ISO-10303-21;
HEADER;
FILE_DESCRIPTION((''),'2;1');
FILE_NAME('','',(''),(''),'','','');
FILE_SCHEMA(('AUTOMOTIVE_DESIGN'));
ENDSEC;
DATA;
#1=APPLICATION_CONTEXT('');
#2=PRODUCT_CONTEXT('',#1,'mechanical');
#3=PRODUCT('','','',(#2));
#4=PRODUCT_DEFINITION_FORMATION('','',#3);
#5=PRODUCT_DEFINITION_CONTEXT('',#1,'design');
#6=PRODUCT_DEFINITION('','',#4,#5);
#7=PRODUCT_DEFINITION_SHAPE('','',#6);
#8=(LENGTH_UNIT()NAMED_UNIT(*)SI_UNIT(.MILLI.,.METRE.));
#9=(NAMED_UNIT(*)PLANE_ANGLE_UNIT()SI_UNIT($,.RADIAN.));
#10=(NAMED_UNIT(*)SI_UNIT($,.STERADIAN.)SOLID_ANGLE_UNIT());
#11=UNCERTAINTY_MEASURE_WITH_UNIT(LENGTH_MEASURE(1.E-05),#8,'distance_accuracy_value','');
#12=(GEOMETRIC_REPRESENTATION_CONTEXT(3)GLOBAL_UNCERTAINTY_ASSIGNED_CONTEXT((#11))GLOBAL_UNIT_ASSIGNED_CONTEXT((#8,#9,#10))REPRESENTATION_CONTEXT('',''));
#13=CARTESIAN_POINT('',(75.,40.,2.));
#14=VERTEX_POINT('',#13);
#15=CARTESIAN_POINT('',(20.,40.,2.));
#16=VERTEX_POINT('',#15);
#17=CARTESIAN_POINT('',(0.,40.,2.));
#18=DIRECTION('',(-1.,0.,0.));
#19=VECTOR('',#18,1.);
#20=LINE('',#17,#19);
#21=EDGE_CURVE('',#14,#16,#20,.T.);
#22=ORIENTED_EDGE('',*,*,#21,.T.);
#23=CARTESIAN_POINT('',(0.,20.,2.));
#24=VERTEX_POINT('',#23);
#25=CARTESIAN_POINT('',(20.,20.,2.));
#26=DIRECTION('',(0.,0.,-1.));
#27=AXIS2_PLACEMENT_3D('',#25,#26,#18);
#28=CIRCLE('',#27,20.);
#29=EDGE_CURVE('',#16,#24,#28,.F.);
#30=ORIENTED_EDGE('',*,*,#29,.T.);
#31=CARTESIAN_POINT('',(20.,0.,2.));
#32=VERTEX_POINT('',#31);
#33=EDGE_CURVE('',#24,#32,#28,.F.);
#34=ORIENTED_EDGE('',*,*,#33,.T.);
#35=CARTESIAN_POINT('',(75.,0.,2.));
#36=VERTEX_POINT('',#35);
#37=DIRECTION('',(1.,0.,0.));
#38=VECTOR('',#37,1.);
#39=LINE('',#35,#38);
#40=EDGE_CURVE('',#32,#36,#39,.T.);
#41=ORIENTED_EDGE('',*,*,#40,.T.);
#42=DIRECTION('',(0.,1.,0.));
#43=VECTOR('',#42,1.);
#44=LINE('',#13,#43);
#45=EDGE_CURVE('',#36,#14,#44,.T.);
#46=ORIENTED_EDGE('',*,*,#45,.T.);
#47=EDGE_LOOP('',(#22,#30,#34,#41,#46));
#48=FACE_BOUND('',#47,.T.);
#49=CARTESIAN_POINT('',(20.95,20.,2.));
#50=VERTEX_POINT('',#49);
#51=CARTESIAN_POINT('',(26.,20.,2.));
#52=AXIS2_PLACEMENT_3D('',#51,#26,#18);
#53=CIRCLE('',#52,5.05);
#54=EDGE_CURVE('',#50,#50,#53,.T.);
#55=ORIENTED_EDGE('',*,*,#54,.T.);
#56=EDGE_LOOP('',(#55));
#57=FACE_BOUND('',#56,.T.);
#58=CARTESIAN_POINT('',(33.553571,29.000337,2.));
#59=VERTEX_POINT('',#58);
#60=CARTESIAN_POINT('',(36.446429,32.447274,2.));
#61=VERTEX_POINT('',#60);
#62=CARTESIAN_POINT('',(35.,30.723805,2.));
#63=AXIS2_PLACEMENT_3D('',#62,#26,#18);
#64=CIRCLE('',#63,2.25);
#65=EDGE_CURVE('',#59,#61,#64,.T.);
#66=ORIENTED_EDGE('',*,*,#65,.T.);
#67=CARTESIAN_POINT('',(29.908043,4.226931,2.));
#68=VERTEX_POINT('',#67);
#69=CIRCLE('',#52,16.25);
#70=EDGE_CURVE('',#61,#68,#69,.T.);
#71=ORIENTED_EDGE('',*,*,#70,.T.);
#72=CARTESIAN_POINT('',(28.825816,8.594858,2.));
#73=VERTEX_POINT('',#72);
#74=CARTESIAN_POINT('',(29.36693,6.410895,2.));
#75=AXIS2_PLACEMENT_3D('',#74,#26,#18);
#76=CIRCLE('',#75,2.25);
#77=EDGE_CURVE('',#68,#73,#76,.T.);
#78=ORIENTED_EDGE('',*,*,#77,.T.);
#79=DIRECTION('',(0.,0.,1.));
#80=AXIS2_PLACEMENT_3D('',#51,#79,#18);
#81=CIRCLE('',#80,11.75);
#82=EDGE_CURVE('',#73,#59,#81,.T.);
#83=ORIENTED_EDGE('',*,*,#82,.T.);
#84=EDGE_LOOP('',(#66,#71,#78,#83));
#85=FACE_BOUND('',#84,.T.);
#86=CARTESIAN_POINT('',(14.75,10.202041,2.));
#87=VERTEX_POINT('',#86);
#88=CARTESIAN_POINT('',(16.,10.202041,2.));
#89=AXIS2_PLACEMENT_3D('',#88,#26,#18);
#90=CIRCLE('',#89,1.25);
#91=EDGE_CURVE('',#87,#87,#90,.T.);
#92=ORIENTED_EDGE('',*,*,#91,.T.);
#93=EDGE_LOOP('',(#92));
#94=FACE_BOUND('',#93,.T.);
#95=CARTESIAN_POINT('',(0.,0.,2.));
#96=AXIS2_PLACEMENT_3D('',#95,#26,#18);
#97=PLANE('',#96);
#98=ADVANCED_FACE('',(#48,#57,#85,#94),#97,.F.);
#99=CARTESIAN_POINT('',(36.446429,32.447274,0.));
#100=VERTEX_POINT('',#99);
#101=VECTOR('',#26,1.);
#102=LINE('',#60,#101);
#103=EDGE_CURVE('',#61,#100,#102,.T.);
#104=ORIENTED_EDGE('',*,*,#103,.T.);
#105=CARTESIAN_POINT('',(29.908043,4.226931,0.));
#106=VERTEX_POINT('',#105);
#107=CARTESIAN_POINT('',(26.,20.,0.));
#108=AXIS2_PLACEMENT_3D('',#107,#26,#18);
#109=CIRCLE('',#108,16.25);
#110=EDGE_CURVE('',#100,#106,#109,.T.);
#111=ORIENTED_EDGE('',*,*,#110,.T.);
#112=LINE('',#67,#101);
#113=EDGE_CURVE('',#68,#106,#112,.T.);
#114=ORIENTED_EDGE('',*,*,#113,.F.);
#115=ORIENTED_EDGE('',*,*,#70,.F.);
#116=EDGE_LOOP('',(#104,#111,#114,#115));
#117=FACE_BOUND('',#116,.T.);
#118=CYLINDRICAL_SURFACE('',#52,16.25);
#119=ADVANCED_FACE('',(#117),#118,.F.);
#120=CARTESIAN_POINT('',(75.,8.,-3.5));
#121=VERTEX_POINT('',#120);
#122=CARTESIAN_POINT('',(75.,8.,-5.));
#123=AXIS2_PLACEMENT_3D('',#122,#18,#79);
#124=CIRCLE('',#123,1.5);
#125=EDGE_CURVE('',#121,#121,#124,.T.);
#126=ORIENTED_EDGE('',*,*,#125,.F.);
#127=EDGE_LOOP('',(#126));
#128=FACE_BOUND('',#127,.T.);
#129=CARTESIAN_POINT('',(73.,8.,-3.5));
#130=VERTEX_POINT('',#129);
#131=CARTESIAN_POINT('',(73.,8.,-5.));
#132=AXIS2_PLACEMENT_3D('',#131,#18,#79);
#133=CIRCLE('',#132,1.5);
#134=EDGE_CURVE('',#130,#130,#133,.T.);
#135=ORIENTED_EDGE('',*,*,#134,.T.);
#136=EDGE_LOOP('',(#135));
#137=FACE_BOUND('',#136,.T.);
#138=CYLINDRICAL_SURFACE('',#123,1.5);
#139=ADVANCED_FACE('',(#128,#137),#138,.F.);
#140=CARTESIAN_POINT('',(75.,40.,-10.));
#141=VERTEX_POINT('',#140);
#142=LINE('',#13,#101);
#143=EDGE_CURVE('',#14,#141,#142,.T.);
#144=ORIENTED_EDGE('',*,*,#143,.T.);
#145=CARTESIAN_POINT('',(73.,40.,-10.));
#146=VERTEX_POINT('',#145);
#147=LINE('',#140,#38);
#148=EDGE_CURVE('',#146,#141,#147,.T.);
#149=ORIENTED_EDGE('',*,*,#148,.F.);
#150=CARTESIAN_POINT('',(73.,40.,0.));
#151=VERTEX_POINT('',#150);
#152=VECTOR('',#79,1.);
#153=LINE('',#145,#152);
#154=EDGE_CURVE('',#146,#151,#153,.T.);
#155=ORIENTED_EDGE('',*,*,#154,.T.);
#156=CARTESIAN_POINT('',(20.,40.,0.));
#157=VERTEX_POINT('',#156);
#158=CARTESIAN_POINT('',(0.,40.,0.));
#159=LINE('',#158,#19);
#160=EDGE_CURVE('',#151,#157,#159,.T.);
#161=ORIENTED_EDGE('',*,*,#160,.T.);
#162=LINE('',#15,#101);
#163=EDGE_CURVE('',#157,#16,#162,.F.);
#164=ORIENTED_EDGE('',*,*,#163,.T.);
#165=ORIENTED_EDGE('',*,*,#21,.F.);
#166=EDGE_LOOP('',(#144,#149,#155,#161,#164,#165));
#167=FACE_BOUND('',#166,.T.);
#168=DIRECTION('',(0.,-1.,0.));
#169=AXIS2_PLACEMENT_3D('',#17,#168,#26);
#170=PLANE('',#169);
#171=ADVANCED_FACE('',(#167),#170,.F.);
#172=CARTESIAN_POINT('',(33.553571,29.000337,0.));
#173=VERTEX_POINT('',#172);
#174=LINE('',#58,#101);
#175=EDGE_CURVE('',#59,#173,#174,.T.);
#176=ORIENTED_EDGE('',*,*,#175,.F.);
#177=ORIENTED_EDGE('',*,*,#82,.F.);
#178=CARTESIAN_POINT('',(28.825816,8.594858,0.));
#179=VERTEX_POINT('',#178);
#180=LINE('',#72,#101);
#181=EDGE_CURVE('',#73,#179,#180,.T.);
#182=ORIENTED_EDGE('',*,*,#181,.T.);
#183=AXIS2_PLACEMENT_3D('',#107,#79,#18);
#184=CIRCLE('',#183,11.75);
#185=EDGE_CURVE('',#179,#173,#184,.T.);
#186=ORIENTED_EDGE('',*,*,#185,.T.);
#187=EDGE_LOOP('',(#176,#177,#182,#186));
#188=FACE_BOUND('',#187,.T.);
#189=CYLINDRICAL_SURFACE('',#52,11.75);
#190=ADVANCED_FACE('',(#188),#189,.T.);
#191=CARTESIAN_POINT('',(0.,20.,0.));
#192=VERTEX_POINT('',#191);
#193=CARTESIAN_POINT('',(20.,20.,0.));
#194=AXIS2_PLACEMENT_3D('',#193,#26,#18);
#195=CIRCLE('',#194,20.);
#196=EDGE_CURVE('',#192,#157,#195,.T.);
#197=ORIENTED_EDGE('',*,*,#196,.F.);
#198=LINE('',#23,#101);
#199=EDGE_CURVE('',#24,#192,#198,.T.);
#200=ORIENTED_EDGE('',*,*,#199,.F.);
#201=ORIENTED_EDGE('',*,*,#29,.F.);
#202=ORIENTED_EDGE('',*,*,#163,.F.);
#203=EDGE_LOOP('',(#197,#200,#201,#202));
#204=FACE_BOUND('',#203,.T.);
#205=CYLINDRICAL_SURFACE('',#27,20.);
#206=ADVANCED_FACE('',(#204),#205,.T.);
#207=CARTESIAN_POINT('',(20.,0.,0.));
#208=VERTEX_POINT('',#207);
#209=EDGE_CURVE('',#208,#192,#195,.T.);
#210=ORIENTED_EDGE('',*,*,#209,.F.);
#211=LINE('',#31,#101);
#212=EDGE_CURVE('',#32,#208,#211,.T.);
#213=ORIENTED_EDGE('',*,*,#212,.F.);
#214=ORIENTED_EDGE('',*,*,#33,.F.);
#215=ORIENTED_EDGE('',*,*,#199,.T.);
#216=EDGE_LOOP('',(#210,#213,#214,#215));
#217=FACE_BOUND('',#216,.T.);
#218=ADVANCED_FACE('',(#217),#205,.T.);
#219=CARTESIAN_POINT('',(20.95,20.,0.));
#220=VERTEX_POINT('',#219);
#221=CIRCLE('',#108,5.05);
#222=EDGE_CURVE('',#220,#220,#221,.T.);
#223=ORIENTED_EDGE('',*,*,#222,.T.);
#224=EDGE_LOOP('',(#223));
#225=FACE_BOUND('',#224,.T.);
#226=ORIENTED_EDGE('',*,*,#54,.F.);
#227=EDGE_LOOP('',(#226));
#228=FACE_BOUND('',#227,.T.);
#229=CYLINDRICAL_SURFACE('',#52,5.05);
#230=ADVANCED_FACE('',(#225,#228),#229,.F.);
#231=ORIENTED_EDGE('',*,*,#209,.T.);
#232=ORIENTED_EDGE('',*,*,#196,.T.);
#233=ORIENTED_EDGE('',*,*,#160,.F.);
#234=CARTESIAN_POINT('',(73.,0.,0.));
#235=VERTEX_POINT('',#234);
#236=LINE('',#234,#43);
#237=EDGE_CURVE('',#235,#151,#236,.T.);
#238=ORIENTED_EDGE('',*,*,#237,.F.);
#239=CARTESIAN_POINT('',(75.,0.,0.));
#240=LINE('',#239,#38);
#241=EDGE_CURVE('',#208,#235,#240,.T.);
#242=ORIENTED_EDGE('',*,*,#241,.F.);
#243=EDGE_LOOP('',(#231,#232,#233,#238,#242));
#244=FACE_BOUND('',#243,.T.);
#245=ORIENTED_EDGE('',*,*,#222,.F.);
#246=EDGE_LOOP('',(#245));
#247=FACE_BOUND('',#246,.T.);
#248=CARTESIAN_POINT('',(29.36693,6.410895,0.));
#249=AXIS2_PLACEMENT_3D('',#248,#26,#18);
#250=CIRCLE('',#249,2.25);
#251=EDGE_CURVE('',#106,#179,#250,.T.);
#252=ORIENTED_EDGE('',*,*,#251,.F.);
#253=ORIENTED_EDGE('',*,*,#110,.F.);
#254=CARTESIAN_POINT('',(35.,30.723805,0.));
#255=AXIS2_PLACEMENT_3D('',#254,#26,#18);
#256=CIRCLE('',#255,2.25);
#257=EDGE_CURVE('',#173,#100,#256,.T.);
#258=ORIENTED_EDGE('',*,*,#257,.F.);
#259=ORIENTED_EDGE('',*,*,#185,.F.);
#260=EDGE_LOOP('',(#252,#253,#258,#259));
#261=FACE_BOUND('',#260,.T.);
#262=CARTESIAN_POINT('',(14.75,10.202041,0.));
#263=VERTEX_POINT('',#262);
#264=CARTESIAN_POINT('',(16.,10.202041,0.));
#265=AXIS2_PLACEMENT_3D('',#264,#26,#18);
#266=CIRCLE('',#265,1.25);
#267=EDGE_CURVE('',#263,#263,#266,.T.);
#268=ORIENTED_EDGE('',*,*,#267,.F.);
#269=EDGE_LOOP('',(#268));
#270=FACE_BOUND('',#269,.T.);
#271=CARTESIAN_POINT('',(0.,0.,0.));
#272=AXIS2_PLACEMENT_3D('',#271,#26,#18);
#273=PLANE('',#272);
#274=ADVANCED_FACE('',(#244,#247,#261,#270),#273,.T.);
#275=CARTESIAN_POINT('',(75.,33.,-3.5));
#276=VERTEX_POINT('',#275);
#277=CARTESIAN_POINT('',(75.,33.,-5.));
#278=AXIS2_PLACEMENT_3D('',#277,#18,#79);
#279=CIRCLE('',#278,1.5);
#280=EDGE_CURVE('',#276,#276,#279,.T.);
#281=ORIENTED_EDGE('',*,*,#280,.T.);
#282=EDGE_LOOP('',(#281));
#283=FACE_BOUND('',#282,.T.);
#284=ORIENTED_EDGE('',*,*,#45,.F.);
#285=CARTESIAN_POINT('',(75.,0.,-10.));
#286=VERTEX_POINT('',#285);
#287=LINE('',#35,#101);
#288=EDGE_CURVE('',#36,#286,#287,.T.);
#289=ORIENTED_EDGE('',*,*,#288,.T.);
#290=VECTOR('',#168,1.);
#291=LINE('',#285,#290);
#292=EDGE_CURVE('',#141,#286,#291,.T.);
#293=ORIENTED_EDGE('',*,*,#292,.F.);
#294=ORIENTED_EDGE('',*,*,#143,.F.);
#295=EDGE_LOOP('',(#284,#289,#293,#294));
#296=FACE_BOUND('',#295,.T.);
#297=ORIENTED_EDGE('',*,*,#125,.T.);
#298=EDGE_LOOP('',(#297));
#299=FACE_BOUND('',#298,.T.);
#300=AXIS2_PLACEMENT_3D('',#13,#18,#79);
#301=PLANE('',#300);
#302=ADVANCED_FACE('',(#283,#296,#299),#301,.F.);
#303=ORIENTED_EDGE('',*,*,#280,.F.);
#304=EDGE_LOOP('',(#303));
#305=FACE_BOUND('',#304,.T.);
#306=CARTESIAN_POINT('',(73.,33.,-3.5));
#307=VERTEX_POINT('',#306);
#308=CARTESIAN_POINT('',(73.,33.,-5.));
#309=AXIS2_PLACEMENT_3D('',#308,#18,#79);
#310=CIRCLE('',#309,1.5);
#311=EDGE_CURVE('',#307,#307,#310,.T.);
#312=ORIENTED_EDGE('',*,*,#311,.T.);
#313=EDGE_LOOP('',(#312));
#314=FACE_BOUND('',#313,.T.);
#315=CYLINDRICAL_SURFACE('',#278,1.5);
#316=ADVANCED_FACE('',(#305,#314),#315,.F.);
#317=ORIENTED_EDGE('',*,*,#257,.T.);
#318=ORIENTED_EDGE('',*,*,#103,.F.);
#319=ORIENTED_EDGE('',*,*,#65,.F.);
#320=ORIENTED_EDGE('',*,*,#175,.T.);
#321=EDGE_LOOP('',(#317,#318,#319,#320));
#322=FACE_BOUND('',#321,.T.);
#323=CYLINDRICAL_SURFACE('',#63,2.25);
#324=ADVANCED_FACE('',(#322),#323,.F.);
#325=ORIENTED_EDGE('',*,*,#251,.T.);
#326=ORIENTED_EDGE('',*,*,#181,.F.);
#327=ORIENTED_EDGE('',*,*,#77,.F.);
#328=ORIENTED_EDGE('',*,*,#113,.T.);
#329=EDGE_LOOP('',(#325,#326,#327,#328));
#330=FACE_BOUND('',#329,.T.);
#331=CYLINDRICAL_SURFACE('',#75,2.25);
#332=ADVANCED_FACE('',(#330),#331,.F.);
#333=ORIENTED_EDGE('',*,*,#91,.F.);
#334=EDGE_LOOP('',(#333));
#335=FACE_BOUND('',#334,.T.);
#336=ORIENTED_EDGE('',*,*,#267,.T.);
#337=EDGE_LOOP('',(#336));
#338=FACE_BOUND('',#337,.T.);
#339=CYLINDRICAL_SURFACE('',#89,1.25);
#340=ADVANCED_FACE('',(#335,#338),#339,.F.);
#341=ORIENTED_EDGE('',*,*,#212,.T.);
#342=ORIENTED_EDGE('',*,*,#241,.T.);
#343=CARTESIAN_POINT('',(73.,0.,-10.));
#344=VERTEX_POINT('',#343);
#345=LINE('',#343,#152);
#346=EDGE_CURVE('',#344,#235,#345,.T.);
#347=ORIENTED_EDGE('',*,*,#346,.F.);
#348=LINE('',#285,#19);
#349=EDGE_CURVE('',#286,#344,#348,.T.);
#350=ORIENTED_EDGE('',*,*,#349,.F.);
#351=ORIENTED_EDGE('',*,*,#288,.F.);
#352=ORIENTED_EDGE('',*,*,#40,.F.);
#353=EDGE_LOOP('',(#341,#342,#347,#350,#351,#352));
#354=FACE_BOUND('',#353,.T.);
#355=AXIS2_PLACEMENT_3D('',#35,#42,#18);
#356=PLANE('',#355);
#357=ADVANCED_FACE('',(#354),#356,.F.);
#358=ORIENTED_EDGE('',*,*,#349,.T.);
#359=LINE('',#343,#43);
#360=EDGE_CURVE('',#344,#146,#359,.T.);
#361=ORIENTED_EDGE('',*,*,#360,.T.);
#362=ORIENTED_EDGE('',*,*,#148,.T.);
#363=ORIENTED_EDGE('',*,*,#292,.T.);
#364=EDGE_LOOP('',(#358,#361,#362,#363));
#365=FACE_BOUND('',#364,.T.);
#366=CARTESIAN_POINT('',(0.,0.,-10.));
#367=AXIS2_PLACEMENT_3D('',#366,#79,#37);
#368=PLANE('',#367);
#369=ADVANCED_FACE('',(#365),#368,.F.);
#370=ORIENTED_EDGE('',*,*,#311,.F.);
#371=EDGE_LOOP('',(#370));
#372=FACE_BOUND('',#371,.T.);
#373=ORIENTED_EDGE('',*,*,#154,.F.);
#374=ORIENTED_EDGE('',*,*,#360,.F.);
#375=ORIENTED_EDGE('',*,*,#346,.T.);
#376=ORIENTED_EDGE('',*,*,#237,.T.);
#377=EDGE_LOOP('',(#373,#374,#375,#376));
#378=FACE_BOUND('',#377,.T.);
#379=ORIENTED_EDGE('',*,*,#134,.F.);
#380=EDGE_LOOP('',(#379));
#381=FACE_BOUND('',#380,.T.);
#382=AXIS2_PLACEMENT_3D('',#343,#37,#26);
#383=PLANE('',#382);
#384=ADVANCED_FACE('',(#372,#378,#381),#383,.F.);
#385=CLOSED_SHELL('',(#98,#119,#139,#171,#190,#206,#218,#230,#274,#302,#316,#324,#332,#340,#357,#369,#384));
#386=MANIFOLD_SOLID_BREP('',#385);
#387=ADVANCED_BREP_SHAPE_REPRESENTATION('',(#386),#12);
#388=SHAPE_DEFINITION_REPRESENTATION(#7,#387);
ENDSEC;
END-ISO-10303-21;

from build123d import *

# Parameters (mm, degrees)
SKETCH_2_W          = 75
SKETCH_2_H          = 40
EXTRUDE_1_DEPTH     = 2
SKETCH_3_R          = 5.05
SKETCH_3_R_2        = 1.25
CUT_EXTRUDE_1_DEPTH = 86.023526156
FILLET_1_R          = 20
SKETCH_7_W          = 2
SKETCH_7_H          = 40
EXTRUDE_3_DEPTH     = 10
SKETCH_10_R         = 1.5
CUT_EXTRUDE_4_DEPTH = 84.839131675


with BuildPart() as part:
    # 草图2 → 凸台-拉伸1 (new body)
    with BuildSketch(Plane.XY):
        with Locations((37.5, 20)):
            Rectangle(SKETCH_2_W, SKETCH_2_H)
    extrude(amount=EXTRUDE_1_DEPTH)

    # 草图3 → 切除-拉伸1 (cut, through all)
    with BuildSketch(Plane(origin=(0, 0, 0), x_dir=(-1, 0, 0), z_dir=(0, 0, -1))):
        with Locations((-26, 20)):
            Circle(SKETCH_3_R)
        with Locations((-16, 10.202041029)):
            Circle(SKETCH_3_R_2)
        with BuildLine():
            ThreePointArc((-36.446428571, 32.447274003), (-41.830655455, 16.332187591), (-29.908043377, 4.226931276))
            ThreePointArc((-29.908043377, 4.226931276), (-27.182966317, 5.86978094), (-28.82581598, 8.594858))
            ThreePointArc((-28.82581598, 8.594858), (-37.446781637, 17.347889489), (-33.553571429, 29.000336587))
            ThreePointArc((-33.553571429, 29.000336587), (-33.276531292, 32.170233866), (-36.446428571, 32.447274003))
        make_face()
    extrude(amount=-CUT_EXTRUDE_1_DEPTH, mode=Mode.SUBTRACT)

    # 圆角1
    fillet_1_edges = [part.edges().sort_by_distance(p)[0] for p in [
        (0, 40, 1),
        (0, 0, 1),
    ]]
    fillet(fillet_1_edges, radius=FILLET_1_R - 0.0001)  # a hair under: the kernel refuses the full size

    # 草图7 → 凸台-拉伸3 (add)
    with BuildSketch(Plane(origin=(0, 0, 0), x_dir=(-1, 0, 0), z_dir=(0, 0, -1))):
        with Locations((-74, 20)):
            Rectangle(SKETCH_7_W, SKETCH_7_H)
    extrude(amount=EXTRUDE_3_DEPTH)

    # 草图10 → 切除-拉伸4 (cut, through all)
    with BuildSketch(Plane.ZY.offset(-73)):
        with Locations((-5, 33)):
            Circle(SKETCH_10_R)
        with Locations((-5, 8)):
            Circle(SKETCH_10_R)
    extrude(amount=-CUT_EXTRUDE_4_DEPTH, mode=Mode.SUBTRACT)


solid = part.part
